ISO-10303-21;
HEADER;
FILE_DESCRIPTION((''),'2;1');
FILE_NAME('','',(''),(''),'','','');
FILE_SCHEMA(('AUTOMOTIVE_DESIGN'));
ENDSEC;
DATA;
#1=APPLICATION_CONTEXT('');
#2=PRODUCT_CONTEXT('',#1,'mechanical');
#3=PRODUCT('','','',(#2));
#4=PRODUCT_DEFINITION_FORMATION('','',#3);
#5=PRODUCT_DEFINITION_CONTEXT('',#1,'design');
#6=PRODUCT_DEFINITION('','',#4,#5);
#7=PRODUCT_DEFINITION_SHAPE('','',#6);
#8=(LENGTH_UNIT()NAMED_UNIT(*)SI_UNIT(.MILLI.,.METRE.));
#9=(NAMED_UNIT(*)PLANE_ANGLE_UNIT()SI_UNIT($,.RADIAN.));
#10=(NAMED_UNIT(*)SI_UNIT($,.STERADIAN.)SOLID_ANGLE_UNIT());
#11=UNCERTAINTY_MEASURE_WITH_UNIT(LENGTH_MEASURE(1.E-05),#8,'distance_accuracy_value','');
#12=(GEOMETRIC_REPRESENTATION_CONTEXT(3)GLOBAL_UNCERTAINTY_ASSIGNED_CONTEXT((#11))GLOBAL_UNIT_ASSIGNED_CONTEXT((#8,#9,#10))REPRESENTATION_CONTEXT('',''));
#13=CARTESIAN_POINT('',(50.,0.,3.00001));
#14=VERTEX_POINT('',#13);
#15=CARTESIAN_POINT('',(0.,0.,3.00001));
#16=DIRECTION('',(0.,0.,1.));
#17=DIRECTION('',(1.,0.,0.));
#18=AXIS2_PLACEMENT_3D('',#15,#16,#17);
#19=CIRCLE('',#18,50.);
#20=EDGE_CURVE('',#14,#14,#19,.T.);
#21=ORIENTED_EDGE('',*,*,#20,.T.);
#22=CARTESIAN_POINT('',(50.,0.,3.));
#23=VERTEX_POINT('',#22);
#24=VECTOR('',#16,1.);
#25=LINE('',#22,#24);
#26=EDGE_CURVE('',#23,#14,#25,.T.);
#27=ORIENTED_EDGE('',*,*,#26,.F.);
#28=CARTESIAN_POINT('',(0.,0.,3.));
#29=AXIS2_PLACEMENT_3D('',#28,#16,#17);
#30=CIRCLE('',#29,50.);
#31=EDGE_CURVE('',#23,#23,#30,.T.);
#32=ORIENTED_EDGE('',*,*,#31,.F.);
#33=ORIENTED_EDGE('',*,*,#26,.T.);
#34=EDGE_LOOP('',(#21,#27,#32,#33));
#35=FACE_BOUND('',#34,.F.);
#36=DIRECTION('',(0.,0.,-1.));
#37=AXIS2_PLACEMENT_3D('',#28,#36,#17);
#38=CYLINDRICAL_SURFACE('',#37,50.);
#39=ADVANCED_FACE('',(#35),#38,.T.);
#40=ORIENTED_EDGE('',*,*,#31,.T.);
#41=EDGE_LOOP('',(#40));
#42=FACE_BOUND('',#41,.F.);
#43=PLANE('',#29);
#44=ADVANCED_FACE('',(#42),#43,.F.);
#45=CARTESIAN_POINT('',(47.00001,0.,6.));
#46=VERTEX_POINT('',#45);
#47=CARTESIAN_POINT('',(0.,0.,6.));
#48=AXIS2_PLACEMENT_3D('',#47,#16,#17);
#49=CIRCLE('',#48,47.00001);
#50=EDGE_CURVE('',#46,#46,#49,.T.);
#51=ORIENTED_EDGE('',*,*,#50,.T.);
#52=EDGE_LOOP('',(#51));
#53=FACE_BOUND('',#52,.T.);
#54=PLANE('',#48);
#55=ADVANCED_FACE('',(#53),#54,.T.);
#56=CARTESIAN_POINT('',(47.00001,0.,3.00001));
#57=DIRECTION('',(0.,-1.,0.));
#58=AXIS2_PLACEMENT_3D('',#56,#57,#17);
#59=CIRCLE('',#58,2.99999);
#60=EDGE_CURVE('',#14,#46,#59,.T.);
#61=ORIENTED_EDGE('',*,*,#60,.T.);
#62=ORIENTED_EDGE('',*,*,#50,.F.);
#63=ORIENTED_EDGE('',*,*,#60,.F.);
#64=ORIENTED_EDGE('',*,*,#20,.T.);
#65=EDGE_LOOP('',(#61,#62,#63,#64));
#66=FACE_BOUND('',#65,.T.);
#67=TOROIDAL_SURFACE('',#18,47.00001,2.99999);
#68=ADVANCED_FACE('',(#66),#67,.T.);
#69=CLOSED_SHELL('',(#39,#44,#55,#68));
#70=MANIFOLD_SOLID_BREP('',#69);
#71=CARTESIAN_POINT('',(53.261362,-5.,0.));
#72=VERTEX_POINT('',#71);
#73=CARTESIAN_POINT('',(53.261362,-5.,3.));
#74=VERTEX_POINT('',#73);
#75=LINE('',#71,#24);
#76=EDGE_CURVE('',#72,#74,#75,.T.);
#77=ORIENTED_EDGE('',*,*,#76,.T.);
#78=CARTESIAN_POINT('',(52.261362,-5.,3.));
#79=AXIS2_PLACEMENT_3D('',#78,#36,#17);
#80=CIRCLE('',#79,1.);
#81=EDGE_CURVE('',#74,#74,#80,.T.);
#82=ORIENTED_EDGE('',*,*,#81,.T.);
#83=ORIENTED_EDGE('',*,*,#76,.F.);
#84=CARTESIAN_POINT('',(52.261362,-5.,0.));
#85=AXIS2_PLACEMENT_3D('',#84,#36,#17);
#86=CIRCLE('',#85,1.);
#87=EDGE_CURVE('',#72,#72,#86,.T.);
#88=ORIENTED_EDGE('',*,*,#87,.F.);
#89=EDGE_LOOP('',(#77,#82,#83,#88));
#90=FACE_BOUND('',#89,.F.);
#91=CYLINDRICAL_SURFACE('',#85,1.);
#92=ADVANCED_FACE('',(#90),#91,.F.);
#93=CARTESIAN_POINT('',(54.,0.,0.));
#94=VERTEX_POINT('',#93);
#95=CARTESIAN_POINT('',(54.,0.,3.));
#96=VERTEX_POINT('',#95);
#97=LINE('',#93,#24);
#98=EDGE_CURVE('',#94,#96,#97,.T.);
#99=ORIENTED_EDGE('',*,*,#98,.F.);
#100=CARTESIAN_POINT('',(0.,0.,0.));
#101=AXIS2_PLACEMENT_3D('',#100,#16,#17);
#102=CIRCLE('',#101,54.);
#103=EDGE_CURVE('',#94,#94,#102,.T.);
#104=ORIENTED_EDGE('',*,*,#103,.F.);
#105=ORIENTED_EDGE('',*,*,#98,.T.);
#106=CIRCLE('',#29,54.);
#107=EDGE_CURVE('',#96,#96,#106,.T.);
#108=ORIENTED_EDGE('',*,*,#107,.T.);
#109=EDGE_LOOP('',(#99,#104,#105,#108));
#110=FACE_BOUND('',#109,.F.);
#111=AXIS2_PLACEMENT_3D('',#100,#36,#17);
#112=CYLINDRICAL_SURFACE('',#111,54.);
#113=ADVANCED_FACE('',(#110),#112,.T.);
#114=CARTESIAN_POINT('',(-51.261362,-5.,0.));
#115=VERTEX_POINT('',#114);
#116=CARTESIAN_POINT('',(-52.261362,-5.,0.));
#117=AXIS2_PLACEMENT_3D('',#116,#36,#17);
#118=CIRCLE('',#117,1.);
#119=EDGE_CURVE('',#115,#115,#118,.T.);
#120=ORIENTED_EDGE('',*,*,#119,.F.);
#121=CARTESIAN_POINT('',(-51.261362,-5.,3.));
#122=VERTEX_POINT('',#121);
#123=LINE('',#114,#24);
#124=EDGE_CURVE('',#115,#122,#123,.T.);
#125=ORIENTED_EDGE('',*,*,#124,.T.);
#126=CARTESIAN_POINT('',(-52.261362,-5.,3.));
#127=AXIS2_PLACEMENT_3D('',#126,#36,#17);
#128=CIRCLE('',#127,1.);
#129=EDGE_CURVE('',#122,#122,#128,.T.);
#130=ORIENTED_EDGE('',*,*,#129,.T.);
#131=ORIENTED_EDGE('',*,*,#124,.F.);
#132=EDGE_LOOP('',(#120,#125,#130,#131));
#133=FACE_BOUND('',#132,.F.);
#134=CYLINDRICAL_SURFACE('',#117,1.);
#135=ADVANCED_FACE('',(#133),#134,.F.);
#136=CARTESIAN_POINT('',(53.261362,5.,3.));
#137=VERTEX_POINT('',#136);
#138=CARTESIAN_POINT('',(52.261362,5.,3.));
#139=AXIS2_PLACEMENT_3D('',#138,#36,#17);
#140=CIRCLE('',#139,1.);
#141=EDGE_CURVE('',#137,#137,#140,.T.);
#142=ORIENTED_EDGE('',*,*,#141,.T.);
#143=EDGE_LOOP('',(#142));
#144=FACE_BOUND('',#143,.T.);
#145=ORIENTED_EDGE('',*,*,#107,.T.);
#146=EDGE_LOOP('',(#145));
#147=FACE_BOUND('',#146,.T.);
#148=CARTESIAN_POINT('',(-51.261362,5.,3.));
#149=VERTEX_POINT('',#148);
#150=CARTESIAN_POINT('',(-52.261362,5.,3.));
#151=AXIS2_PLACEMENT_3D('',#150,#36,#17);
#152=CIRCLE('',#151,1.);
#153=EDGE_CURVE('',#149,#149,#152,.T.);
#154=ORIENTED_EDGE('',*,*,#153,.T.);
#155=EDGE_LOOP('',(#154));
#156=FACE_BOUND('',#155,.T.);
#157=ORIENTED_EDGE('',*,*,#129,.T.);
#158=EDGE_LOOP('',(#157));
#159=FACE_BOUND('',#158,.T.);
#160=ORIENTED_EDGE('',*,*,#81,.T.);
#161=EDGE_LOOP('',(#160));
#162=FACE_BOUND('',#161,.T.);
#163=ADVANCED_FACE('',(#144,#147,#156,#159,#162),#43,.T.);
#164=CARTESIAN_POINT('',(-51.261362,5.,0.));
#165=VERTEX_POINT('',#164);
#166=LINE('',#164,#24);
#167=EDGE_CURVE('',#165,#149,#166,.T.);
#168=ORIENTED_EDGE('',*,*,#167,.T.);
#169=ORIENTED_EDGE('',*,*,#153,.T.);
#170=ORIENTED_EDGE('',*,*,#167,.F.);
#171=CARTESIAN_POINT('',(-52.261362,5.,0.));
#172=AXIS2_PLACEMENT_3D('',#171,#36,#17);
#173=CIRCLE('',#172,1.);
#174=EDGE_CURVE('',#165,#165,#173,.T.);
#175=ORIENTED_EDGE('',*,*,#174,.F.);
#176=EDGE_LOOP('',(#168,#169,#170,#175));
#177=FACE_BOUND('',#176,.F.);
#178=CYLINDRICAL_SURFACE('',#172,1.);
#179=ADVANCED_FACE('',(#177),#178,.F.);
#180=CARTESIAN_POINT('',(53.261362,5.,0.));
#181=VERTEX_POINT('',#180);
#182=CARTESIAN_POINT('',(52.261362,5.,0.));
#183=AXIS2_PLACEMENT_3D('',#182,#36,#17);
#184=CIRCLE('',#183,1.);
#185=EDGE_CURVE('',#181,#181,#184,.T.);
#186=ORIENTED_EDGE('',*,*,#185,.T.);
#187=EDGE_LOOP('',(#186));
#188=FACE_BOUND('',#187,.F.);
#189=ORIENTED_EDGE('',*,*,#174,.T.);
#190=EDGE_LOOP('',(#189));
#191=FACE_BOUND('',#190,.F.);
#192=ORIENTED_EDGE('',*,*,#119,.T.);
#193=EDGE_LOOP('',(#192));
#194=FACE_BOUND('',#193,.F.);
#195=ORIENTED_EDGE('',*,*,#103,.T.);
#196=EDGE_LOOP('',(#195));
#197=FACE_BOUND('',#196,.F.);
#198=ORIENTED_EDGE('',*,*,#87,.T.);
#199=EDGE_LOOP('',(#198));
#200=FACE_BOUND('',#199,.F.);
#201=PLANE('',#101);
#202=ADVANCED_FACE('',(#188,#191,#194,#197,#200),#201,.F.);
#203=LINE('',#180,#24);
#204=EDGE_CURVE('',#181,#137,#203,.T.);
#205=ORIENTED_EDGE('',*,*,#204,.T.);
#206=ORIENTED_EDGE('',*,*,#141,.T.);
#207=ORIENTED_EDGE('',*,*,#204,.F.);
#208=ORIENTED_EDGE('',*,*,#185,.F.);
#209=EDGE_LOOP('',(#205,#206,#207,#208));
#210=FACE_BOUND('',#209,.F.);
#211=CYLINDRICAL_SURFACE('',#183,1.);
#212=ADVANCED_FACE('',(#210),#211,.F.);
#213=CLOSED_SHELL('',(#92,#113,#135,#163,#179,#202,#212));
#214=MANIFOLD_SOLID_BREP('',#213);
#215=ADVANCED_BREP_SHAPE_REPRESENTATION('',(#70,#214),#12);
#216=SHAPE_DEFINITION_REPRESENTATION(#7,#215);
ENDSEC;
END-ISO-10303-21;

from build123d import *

# Parameters (mm, degrees)
F0_R     = 54
F1_DEPTH = 3
F2_R     = 50
F3_DEPTH = 3
F4_R     = 2.99999
F5_R     = 1
F6_DEPTH = 3


# Not quite as in the source:
# - a fillet or chamfer is up to 0.001 mm smaller than in the source, because OpenCascade refuses the exact size


with BuildPart() as f1:
    # F0 (on Top) → F1 (new body)
    with BuildSketch(Plane.XY):
        Circle(F0_R)
    extrude(amount=F1_DEPTH)

    # F5 (on face) → F6 (cut, through all)
    with BuildSketch(Plane(origin=(0, 0, 0), x_dir=(1, 0, 0), z_dir=(0, 0, -1))):
        with Locations((-52.2613624009, 5)):
            Circle(F5_R)
        with Locations((-52.2613624009, -5)):
            Circle(F5_R)
        with Locations((52.2613624009, -5)):
            Circle(F5_R)
        with Locations((52.2613624009, 5)):
            Circle(F5_R)
    extrude(amount=-F6_DEPTH, mode=Mode.SUBTRACT)


with BuildPart() as f3:
    # F2 (on face) → F3 (new body)
    with BuildSketch(Plane.XY.offset(3)):
        Circle(F2_R)
    extrude(amount=F3_DEPTH)

    # F4 (radius 3 in the source; OpenCascade refuses exactly that, so slightly less here)
    f4_edges = [f3.edges().sort_by_distance(p)[0] for p in [
        (-50, 0, 6),
    ]]
    fillet(f4_edges, radius=F4_R)


solid = Compound([f1.part, f3.part])
